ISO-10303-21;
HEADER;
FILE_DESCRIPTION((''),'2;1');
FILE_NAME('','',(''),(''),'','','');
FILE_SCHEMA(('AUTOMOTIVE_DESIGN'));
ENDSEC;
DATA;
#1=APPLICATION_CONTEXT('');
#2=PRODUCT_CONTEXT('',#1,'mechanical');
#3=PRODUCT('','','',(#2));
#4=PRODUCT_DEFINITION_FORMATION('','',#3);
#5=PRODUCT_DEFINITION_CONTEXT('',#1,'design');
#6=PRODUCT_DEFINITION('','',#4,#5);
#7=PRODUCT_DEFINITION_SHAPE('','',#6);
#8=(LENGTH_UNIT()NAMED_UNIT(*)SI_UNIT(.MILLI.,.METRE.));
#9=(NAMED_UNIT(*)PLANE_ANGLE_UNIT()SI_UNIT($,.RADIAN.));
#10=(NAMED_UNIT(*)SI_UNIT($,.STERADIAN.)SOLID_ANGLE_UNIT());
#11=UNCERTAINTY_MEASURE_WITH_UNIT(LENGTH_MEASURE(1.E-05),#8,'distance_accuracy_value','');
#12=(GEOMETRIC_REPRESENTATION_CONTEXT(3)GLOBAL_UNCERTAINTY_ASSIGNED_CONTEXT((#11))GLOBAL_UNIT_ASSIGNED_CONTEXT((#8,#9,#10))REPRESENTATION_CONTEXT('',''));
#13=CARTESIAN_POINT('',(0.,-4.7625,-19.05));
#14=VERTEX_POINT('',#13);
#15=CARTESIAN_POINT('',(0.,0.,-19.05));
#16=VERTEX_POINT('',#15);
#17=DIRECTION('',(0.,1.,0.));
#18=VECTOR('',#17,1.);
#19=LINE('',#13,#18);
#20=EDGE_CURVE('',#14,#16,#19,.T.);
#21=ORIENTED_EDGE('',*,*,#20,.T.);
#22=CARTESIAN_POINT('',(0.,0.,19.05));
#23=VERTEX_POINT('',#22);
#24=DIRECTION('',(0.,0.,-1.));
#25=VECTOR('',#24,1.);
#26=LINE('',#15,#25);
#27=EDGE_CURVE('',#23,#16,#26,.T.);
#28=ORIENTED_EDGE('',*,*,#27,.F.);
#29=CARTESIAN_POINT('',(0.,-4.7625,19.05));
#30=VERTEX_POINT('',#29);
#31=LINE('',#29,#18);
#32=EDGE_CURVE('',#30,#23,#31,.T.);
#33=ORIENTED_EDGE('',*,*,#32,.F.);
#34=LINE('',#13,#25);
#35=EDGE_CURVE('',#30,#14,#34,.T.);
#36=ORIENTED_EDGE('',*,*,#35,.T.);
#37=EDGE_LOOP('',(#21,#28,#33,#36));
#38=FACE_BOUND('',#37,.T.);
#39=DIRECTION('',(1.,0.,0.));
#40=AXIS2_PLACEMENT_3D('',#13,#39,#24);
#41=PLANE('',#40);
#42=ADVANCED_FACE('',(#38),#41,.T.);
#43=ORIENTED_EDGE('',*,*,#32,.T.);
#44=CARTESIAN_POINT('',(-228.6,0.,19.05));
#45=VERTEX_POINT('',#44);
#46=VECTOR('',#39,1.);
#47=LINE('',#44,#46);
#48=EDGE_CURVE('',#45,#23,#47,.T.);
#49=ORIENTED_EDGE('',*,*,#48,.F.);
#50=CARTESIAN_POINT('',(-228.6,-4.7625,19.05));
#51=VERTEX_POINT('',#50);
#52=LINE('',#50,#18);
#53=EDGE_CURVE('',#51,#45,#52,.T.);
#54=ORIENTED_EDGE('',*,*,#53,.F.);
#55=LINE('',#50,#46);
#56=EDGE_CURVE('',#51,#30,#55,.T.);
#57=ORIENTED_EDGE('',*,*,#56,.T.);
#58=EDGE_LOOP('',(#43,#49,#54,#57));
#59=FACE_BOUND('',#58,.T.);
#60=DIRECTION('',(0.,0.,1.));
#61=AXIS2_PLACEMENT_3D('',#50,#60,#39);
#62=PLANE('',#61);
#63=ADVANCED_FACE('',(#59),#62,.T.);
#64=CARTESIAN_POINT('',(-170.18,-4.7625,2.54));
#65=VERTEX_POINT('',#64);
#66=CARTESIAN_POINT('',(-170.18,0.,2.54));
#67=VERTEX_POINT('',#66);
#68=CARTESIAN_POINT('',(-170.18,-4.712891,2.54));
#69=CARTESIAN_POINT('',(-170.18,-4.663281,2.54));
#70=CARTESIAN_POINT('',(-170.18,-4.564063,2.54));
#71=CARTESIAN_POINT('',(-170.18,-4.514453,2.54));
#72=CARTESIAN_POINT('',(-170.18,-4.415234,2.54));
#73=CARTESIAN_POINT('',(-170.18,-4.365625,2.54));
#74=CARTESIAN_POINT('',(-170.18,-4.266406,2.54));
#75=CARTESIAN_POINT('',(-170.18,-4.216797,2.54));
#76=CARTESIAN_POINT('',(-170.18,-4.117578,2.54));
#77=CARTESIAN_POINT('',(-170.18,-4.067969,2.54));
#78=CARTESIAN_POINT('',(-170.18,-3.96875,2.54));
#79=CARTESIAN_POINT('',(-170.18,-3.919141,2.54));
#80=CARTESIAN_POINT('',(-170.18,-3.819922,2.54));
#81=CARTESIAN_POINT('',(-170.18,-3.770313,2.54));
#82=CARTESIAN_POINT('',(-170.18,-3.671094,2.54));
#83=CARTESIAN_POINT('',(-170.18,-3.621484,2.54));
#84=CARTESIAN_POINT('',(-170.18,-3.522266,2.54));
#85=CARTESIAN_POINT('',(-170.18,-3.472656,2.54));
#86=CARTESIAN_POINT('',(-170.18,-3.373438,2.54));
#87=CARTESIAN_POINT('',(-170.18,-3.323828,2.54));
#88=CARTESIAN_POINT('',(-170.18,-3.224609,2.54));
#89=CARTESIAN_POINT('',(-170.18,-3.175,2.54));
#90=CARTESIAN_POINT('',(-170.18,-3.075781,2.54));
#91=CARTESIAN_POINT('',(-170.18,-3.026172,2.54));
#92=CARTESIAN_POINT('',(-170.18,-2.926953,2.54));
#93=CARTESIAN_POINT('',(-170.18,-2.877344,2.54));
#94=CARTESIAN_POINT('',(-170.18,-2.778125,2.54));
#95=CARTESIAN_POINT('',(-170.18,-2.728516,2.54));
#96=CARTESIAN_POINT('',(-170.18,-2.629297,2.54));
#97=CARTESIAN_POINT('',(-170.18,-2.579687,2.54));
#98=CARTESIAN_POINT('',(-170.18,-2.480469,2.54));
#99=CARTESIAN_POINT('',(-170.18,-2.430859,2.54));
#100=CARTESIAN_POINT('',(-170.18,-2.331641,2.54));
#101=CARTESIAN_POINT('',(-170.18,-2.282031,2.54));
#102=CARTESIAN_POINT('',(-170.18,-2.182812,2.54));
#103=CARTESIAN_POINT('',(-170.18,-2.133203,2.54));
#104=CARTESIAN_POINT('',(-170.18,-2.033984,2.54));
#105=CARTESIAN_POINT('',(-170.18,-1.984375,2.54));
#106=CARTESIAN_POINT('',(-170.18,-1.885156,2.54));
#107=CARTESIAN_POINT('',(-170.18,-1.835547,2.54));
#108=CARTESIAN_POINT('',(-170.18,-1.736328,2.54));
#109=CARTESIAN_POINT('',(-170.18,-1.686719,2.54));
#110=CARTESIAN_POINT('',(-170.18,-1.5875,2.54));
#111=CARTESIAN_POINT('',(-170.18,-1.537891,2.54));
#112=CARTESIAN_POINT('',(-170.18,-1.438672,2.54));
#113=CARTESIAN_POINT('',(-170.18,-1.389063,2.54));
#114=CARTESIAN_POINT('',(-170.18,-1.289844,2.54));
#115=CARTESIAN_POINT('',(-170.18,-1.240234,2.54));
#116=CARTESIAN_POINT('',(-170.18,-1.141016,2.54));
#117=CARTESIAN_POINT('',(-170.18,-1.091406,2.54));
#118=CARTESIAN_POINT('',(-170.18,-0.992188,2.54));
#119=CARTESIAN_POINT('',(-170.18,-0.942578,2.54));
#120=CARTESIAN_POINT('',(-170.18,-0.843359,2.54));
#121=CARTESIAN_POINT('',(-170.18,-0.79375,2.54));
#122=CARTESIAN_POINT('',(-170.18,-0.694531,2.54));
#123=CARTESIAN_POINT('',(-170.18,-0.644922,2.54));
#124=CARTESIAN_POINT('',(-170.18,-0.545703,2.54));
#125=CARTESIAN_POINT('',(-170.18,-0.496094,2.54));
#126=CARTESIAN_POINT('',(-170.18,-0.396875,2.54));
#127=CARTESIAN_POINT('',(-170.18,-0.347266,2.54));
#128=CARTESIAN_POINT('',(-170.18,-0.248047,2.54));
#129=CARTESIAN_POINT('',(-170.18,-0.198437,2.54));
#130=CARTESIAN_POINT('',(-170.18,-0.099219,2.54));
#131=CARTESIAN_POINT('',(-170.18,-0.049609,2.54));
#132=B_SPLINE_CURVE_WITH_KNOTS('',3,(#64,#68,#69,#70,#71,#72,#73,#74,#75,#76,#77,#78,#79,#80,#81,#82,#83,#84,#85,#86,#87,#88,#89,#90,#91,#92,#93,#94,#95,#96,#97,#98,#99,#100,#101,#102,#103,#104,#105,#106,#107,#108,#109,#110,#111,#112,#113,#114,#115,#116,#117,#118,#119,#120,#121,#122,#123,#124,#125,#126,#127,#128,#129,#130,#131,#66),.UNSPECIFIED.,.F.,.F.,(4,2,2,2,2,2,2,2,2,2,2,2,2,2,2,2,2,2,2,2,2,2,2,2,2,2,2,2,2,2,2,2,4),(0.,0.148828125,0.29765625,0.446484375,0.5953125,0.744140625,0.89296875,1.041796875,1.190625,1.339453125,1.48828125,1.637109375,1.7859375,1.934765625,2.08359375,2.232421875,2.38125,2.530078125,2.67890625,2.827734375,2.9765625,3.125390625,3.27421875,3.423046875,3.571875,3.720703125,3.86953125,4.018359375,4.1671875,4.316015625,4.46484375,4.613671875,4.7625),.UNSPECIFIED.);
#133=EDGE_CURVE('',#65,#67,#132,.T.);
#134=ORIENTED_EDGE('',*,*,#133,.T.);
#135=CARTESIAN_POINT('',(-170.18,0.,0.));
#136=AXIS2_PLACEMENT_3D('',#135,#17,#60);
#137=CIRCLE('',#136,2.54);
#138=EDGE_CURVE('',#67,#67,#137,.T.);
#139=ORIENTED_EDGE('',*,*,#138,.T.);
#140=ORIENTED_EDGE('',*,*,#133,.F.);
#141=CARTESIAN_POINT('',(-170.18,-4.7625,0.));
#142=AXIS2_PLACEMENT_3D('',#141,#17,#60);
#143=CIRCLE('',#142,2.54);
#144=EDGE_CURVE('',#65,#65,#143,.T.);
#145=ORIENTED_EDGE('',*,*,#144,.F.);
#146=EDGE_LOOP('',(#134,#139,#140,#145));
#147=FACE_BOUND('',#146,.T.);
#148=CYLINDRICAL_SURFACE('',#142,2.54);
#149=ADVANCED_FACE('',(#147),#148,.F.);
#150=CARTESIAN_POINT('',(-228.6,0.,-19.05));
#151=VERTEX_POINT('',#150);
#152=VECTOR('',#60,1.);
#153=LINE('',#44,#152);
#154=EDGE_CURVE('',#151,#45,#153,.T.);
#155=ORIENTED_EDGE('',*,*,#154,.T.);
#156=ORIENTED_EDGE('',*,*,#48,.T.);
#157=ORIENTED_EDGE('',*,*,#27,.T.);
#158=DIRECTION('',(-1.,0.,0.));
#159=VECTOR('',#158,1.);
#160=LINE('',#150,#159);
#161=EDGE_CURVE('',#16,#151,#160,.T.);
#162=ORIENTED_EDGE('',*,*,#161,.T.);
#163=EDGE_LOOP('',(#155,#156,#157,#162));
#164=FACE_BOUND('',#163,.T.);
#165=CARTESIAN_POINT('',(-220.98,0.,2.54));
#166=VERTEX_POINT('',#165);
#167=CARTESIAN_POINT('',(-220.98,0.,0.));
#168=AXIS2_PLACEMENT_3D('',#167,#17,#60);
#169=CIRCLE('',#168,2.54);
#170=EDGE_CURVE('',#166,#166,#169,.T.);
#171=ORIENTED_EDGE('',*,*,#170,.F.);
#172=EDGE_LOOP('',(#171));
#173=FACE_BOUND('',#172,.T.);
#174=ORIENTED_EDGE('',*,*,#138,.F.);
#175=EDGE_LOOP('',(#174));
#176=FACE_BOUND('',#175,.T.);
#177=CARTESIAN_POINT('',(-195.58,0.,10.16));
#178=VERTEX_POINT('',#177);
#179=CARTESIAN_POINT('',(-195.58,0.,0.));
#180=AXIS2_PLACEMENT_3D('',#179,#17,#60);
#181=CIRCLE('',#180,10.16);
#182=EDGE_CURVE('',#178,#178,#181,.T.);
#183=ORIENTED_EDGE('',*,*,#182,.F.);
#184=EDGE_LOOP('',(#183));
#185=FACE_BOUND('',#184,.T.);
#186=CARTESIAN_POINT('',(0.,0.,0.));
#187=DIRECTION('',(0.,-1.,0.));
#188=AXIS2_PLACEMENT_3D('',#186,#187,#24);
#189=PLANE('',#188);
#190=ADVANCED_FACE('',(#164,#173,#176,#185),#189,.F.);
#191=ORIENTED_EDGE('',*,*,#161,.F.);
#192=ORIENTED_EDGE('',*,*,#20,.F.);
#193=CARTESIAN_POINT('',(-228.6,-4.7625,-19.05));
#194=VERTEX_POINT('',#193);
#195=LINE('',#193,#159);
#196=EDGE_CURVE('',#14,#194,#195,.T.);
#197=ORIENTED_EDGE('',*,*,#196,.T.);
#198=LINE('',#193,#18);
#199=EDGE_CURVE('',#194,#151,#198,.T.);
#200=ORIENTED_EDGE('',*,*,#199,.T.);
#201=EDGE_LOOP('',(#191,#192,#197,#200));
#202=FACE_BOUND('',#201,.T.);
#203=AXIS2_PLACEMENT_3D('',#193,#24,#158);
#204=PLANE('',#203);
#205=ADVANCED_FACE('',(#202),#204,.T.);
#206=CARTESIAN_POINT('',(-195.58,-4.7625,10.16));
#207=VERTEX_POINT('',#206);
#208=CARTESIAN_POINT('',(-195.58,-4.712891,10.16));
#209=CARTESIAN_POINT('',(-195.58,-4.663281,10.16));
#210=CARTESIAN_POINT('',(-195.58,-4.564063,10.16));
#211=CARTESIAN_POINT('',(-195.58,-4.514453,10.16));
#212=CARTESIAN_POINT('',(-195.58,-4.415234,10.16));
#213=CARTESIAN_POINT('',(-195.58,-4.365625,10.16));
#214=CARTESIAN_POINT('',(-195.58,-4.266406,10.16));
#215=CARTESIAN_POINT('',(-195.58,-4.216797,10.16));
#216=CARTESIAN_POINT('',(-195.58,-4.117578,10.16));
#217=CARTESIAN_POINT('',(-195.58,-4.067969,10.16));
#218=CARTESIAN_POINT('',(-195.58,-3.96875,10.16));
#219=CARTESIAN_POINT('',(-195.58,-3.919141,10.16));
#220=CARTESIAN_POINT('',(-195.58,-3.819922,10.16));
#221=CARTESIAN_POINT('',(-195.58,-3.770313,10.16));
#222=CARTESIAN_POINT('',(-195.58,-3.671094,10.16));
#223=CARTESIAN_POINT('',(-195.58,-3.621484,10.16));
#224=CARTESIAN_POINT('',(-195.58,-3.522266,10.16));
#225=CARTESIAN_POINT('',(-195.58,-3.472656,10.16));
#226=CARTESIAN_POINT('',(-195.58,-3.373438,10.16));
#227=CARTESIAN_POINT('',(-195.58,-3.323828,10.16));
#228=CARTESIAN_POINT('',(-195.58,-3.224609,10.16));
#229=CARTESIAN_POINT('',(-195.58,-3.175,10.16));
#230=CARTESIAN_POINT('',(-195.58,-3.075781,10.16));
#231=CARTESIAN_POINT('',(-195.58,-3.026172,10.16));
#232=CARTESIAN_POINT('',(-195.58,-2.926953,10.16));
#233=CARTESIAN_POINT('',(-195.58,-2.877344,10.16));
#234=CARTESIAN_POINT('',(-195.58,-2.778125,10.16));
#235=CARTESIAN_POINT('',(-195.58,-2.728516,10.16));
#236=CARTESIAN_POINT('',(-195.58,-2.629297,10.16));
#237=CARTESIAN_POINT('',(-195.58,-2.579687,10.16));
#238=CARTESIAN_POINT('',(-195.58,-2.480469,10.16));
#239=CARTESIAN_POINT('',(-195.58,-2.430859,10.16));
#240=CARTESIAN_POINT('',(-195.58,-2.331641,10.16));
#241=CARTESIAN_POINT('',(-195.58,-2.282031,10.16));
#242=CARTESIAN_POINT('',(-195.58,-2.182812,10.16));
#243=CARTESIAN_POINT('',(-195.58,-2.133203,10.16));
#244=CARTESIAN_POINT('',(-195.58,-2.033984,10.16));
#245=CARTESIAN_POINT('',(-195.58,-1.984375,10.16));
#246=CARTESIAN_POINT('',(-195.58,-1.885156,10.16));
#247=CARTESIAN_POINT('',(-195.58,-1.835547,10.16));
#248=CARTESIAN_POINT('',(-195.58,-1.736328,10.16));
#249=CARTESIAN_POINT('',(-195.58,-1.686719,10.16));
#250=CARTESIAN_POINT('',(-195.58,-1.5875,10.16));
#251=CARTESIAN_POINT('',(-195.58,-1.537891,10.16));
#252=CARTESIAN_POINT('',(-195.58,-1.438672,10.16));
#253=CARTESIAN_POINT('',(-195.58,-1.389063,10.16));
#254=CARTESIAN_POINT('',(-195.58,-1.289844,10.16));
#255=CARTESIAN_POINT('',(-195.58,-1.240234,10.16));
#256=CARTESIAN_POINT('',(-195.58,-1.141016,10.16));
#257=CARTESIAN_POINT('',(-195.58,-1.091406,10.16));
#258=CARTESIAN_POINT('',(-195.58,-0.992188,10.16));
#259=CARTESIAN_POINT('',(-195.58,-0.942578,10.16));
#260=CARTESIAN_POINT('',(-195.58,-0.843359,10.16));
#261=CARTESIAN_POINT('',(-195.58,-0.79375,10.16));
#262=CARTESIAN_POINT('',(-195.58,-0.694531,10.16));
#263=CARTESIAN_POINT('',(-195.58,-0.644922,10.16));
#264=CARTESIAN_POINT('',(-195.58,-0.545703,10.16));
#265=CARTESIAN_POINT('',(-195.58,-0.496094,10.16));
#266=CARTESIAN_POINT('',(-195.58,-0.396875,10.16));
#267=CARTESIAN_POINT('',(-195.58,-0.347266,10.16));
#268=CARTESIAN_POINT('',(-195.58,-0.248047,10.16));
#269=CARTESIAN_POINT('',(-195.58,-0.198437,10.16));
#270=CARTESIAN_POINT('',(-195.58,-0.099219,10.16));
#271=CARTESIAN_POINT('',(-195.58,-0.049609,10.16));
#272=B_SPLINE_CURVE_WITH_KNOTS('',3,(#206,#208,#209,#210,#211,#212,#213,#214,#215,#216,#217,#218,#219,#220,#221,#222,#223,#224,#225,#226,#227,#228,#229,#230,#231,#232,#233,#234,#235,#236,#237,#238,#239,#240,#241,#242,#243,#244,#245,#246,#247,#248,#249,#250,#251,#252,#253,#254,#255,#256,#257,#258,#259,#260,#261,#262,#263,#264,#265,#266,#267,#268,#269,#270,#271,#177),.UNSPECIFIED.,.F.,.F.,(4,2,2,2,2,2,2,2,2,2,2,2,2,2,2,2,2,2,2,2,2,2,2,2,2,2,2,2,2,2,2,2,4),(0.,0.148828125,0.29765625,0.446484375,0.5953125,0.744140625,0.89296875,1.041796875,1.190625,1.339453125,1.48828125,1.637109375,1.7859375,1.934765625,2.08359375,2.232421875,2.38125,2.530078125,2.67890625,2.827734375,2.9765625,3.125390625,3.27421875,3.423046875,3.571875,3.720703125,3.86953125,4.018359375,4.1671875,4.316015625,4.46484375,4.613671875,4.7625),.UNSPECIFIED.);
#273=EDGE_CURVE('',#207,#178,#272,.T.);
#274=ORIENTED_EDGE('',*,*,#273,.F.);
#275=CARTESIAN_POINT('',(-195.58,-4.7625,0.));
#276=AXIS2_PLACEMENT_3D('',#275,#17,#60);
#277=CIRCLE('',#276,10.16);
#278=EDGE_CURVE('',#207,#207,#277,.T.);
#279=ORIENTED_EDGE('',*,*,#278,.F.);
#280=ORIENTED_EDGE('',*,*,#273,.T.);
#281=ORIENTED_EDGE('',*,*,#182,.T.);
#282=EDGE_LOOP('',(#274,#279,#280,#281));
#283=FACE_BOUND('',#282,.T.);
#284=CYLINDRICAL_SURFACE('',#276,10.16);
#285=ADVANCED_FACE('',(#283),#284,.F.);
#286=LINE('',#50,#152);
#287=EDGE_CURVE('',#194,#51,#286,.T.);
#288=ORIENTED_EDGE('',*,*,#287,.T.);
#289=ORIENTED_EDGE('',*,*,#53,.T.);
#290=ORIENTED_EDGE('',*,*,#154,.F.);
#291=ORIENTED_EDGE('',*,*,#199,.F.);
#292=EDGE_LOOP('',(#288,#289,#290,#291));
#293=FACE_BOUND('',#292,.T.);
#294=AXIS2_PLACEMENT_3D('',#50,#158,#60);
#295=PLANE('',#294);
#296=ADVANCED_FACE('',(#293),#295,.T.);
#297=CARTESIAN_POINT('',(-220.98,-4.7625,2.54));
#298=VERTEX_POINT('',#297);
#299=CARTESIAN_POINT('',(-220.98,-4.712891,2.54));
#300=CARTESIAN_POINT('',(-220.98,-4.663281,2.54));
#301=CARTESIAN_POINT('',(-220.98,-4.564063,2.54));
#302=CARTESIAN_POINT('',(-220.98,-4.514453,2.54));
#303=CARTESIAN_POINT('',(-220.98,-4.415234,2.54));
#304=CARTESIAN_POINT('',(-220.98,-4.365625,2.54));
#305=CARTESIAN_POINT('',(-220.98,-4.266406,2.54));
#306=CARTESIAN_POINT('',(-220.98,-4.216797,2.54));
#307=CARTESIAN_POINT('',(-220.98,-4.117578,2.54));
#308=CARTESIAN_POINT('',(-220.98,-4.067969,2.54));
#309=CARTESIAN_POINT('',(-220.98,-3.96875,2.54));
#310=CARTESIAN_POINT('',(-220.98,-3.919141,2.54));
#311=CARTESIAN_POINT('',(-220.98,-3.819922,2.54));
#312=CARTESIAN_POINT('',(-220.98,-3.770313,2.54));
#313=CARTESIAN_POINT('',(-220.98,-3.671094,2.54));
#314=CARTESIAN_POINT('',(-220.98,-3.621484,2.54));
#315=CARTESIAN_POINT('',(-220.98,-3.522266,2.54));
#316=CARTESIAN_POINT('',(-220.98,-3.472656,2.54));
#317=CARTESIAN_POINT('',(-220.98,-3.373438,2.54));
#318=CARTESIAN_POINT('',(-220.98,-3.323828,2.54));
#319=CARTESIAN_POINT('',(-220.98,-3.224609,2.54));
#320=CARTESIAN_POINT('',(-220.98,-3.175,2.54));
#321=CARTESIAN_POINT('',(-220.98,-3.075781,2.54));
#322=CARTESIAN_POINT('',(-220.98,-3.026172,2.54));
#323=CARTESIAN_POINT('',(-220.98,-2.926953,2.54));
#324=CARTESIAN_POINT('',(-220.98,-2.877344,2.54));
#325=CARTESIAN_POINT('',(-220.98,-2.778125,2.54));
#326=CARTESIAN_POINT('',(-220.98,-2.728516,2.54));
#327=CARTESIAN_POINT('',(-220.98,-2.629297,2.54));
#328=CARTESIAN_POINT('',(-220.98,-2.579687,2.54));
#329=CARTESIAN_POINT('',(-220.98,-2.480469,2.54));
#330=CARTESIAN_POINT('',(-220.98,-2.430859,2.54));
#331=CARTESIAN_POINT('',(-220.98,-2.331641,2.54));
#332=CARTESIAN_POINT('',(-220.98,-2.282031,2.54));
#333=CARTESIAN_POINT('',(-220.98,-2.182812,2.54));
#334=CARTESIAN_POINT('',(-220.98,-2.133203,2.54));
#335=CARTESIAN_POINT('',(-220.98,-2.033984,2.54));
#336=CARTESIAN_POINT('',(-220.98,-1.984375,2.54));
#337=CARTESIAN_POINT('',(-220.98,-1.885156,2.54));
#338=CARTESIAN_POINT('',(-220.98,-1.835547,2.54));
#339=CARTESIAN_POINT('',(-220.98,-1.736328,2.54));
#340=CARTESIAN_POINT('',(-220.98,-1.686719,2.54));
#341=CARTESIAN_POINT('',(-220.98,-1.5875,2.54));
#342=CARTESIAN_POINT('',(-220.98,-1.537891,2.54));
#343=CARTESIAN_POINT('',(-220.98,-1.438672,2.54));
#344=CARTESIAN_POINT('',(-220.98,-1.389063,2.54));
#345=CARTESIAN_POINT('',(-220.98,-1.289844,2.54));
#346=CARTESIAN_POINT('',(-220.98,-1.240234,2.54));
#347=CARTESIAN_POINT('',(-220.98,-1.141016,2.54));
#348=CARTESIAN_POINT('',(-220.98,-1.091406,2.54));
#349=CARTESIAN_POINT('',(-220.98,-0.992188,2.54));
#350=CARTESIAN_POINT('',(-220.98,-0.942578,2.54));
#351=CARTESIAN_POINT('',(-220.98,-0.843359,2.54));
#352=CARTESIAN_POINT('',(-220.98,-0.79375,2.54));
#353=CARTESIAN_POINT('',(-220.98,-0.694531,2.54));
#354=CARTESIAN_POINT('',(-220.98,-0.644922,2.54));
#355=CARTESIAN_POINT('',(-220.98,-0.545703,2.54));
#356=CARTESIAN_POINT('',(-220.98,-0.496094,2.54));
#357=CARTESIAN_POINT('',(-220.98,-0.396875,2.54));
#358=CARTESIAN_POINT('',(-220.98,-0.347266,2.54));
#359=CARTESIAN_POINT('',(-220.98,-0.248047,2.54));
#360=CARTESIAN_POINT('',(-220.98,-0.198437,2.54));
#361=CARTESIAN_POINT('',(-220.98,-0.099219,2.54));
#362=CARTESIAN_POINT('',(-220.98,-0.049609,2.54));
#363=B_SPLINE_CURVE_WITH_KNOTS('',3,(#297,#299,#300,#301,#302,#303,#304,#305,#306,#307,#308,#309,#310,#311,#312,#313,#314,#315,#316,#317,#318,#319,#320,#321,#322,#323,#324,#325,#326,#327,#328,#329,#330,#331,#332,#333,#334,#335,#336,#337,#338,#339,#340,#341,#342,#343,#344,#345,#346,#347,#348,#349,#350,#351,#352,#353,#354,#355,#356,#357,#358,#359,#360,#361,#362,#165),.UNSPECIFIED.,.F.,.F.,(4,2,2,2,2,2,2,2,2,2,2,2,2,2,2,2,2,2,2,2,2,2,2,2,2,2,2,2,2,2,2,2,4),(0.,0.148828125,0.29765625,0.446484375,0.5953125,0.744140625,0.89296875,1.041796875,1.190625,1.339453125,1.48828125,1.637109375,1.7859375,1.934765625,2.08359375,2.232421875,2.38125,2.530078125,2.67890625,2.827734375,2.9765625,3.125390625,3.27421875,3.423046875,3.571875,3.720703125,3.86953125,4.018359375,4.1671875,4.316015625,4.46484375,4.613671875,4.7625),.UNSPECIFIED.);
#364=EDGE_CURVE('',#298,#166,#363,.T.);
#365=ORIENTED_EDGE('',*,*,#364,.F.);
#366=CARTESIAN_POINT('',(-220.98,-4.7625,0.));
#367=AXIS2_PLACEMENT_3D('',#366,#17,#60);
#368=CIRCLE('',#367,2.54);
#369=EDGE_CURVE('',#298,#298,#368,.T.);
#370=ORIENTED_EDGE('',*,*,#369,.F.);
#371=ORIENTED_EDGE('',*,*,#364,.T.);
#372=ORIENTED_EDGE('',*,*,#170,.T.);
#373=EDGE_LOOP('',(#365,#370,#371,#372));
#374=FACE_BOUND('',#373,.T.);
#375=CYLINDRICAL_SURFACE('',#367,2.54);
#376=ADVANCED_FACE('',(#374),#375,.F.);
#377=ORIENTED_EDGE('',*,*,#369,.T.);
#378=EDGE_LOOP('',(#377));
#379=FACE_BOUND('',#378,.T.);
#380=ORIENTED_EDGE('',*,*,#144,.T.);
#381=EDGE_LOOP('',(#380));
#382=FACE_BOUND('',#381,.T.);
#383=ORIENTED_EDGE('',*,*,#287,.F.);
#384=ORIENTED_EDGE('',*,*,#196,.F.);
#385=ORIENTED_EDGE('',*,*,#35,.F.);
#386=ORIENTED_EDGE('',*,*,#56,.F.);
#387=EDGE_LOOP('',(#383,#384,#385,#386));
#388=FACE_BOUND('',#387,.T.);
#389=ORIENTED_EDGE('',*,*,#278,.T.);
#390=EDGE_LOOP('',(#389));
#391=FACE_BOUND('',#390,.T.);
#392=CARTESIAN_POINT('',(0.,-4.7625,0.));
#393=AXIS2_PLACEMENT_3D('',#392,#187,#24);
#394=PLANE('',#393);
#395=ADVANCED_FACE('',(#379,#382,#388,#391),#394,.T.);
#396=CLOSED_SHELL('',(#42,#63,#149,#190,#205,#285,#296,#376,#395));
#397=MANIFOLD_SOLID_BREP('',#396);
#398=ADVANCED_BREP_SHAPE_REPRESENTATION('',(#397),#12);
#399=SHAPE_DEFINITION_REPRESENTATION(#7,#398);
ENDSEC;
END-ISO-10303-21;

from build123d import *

# Parameters (mm, degrees)
SKETCH3_W          = 228.6
SKETCH3_H          = 38.1
SKETCH3_R          = 2.54
SKETCH3_R_2        = 10.16
BASE_FLANGE1_DEPTH = 4.7625


# Sheet-metal steps are written as plain solids
with BuildPart() as part:
    # Sketch3 → Base-Flange1 (new body)
    with BuildSketch(Plane(origin=(0, 0, 0), x_dir=(1, 0, 0), z_dir=(0, 1, 0))):
        with Locations((-114.3, 0)):
            Rectangle(SKETCH3_W, SKETCH3_H)
        with Locations(Location((-220.98, 0, 0), (0, 0, 270))):
            Circle(SKETCH3_R, mode=Mode.SUBTRACT)
        with Locations(Location((-195.58, 0, 0), (0, 0, 270))):
            Circle(SKETCH3_R_2, mode=Mode.SUBTRACT)
        with Locations(Location((-170.18, 0, 0), (0, 0, 270))):
            Circle(SKETCH3_R, mode=Mode.SUBTRACT)
    extrude(amount=-BASE_FLANGE1_DEPTH)


solid = part.part
